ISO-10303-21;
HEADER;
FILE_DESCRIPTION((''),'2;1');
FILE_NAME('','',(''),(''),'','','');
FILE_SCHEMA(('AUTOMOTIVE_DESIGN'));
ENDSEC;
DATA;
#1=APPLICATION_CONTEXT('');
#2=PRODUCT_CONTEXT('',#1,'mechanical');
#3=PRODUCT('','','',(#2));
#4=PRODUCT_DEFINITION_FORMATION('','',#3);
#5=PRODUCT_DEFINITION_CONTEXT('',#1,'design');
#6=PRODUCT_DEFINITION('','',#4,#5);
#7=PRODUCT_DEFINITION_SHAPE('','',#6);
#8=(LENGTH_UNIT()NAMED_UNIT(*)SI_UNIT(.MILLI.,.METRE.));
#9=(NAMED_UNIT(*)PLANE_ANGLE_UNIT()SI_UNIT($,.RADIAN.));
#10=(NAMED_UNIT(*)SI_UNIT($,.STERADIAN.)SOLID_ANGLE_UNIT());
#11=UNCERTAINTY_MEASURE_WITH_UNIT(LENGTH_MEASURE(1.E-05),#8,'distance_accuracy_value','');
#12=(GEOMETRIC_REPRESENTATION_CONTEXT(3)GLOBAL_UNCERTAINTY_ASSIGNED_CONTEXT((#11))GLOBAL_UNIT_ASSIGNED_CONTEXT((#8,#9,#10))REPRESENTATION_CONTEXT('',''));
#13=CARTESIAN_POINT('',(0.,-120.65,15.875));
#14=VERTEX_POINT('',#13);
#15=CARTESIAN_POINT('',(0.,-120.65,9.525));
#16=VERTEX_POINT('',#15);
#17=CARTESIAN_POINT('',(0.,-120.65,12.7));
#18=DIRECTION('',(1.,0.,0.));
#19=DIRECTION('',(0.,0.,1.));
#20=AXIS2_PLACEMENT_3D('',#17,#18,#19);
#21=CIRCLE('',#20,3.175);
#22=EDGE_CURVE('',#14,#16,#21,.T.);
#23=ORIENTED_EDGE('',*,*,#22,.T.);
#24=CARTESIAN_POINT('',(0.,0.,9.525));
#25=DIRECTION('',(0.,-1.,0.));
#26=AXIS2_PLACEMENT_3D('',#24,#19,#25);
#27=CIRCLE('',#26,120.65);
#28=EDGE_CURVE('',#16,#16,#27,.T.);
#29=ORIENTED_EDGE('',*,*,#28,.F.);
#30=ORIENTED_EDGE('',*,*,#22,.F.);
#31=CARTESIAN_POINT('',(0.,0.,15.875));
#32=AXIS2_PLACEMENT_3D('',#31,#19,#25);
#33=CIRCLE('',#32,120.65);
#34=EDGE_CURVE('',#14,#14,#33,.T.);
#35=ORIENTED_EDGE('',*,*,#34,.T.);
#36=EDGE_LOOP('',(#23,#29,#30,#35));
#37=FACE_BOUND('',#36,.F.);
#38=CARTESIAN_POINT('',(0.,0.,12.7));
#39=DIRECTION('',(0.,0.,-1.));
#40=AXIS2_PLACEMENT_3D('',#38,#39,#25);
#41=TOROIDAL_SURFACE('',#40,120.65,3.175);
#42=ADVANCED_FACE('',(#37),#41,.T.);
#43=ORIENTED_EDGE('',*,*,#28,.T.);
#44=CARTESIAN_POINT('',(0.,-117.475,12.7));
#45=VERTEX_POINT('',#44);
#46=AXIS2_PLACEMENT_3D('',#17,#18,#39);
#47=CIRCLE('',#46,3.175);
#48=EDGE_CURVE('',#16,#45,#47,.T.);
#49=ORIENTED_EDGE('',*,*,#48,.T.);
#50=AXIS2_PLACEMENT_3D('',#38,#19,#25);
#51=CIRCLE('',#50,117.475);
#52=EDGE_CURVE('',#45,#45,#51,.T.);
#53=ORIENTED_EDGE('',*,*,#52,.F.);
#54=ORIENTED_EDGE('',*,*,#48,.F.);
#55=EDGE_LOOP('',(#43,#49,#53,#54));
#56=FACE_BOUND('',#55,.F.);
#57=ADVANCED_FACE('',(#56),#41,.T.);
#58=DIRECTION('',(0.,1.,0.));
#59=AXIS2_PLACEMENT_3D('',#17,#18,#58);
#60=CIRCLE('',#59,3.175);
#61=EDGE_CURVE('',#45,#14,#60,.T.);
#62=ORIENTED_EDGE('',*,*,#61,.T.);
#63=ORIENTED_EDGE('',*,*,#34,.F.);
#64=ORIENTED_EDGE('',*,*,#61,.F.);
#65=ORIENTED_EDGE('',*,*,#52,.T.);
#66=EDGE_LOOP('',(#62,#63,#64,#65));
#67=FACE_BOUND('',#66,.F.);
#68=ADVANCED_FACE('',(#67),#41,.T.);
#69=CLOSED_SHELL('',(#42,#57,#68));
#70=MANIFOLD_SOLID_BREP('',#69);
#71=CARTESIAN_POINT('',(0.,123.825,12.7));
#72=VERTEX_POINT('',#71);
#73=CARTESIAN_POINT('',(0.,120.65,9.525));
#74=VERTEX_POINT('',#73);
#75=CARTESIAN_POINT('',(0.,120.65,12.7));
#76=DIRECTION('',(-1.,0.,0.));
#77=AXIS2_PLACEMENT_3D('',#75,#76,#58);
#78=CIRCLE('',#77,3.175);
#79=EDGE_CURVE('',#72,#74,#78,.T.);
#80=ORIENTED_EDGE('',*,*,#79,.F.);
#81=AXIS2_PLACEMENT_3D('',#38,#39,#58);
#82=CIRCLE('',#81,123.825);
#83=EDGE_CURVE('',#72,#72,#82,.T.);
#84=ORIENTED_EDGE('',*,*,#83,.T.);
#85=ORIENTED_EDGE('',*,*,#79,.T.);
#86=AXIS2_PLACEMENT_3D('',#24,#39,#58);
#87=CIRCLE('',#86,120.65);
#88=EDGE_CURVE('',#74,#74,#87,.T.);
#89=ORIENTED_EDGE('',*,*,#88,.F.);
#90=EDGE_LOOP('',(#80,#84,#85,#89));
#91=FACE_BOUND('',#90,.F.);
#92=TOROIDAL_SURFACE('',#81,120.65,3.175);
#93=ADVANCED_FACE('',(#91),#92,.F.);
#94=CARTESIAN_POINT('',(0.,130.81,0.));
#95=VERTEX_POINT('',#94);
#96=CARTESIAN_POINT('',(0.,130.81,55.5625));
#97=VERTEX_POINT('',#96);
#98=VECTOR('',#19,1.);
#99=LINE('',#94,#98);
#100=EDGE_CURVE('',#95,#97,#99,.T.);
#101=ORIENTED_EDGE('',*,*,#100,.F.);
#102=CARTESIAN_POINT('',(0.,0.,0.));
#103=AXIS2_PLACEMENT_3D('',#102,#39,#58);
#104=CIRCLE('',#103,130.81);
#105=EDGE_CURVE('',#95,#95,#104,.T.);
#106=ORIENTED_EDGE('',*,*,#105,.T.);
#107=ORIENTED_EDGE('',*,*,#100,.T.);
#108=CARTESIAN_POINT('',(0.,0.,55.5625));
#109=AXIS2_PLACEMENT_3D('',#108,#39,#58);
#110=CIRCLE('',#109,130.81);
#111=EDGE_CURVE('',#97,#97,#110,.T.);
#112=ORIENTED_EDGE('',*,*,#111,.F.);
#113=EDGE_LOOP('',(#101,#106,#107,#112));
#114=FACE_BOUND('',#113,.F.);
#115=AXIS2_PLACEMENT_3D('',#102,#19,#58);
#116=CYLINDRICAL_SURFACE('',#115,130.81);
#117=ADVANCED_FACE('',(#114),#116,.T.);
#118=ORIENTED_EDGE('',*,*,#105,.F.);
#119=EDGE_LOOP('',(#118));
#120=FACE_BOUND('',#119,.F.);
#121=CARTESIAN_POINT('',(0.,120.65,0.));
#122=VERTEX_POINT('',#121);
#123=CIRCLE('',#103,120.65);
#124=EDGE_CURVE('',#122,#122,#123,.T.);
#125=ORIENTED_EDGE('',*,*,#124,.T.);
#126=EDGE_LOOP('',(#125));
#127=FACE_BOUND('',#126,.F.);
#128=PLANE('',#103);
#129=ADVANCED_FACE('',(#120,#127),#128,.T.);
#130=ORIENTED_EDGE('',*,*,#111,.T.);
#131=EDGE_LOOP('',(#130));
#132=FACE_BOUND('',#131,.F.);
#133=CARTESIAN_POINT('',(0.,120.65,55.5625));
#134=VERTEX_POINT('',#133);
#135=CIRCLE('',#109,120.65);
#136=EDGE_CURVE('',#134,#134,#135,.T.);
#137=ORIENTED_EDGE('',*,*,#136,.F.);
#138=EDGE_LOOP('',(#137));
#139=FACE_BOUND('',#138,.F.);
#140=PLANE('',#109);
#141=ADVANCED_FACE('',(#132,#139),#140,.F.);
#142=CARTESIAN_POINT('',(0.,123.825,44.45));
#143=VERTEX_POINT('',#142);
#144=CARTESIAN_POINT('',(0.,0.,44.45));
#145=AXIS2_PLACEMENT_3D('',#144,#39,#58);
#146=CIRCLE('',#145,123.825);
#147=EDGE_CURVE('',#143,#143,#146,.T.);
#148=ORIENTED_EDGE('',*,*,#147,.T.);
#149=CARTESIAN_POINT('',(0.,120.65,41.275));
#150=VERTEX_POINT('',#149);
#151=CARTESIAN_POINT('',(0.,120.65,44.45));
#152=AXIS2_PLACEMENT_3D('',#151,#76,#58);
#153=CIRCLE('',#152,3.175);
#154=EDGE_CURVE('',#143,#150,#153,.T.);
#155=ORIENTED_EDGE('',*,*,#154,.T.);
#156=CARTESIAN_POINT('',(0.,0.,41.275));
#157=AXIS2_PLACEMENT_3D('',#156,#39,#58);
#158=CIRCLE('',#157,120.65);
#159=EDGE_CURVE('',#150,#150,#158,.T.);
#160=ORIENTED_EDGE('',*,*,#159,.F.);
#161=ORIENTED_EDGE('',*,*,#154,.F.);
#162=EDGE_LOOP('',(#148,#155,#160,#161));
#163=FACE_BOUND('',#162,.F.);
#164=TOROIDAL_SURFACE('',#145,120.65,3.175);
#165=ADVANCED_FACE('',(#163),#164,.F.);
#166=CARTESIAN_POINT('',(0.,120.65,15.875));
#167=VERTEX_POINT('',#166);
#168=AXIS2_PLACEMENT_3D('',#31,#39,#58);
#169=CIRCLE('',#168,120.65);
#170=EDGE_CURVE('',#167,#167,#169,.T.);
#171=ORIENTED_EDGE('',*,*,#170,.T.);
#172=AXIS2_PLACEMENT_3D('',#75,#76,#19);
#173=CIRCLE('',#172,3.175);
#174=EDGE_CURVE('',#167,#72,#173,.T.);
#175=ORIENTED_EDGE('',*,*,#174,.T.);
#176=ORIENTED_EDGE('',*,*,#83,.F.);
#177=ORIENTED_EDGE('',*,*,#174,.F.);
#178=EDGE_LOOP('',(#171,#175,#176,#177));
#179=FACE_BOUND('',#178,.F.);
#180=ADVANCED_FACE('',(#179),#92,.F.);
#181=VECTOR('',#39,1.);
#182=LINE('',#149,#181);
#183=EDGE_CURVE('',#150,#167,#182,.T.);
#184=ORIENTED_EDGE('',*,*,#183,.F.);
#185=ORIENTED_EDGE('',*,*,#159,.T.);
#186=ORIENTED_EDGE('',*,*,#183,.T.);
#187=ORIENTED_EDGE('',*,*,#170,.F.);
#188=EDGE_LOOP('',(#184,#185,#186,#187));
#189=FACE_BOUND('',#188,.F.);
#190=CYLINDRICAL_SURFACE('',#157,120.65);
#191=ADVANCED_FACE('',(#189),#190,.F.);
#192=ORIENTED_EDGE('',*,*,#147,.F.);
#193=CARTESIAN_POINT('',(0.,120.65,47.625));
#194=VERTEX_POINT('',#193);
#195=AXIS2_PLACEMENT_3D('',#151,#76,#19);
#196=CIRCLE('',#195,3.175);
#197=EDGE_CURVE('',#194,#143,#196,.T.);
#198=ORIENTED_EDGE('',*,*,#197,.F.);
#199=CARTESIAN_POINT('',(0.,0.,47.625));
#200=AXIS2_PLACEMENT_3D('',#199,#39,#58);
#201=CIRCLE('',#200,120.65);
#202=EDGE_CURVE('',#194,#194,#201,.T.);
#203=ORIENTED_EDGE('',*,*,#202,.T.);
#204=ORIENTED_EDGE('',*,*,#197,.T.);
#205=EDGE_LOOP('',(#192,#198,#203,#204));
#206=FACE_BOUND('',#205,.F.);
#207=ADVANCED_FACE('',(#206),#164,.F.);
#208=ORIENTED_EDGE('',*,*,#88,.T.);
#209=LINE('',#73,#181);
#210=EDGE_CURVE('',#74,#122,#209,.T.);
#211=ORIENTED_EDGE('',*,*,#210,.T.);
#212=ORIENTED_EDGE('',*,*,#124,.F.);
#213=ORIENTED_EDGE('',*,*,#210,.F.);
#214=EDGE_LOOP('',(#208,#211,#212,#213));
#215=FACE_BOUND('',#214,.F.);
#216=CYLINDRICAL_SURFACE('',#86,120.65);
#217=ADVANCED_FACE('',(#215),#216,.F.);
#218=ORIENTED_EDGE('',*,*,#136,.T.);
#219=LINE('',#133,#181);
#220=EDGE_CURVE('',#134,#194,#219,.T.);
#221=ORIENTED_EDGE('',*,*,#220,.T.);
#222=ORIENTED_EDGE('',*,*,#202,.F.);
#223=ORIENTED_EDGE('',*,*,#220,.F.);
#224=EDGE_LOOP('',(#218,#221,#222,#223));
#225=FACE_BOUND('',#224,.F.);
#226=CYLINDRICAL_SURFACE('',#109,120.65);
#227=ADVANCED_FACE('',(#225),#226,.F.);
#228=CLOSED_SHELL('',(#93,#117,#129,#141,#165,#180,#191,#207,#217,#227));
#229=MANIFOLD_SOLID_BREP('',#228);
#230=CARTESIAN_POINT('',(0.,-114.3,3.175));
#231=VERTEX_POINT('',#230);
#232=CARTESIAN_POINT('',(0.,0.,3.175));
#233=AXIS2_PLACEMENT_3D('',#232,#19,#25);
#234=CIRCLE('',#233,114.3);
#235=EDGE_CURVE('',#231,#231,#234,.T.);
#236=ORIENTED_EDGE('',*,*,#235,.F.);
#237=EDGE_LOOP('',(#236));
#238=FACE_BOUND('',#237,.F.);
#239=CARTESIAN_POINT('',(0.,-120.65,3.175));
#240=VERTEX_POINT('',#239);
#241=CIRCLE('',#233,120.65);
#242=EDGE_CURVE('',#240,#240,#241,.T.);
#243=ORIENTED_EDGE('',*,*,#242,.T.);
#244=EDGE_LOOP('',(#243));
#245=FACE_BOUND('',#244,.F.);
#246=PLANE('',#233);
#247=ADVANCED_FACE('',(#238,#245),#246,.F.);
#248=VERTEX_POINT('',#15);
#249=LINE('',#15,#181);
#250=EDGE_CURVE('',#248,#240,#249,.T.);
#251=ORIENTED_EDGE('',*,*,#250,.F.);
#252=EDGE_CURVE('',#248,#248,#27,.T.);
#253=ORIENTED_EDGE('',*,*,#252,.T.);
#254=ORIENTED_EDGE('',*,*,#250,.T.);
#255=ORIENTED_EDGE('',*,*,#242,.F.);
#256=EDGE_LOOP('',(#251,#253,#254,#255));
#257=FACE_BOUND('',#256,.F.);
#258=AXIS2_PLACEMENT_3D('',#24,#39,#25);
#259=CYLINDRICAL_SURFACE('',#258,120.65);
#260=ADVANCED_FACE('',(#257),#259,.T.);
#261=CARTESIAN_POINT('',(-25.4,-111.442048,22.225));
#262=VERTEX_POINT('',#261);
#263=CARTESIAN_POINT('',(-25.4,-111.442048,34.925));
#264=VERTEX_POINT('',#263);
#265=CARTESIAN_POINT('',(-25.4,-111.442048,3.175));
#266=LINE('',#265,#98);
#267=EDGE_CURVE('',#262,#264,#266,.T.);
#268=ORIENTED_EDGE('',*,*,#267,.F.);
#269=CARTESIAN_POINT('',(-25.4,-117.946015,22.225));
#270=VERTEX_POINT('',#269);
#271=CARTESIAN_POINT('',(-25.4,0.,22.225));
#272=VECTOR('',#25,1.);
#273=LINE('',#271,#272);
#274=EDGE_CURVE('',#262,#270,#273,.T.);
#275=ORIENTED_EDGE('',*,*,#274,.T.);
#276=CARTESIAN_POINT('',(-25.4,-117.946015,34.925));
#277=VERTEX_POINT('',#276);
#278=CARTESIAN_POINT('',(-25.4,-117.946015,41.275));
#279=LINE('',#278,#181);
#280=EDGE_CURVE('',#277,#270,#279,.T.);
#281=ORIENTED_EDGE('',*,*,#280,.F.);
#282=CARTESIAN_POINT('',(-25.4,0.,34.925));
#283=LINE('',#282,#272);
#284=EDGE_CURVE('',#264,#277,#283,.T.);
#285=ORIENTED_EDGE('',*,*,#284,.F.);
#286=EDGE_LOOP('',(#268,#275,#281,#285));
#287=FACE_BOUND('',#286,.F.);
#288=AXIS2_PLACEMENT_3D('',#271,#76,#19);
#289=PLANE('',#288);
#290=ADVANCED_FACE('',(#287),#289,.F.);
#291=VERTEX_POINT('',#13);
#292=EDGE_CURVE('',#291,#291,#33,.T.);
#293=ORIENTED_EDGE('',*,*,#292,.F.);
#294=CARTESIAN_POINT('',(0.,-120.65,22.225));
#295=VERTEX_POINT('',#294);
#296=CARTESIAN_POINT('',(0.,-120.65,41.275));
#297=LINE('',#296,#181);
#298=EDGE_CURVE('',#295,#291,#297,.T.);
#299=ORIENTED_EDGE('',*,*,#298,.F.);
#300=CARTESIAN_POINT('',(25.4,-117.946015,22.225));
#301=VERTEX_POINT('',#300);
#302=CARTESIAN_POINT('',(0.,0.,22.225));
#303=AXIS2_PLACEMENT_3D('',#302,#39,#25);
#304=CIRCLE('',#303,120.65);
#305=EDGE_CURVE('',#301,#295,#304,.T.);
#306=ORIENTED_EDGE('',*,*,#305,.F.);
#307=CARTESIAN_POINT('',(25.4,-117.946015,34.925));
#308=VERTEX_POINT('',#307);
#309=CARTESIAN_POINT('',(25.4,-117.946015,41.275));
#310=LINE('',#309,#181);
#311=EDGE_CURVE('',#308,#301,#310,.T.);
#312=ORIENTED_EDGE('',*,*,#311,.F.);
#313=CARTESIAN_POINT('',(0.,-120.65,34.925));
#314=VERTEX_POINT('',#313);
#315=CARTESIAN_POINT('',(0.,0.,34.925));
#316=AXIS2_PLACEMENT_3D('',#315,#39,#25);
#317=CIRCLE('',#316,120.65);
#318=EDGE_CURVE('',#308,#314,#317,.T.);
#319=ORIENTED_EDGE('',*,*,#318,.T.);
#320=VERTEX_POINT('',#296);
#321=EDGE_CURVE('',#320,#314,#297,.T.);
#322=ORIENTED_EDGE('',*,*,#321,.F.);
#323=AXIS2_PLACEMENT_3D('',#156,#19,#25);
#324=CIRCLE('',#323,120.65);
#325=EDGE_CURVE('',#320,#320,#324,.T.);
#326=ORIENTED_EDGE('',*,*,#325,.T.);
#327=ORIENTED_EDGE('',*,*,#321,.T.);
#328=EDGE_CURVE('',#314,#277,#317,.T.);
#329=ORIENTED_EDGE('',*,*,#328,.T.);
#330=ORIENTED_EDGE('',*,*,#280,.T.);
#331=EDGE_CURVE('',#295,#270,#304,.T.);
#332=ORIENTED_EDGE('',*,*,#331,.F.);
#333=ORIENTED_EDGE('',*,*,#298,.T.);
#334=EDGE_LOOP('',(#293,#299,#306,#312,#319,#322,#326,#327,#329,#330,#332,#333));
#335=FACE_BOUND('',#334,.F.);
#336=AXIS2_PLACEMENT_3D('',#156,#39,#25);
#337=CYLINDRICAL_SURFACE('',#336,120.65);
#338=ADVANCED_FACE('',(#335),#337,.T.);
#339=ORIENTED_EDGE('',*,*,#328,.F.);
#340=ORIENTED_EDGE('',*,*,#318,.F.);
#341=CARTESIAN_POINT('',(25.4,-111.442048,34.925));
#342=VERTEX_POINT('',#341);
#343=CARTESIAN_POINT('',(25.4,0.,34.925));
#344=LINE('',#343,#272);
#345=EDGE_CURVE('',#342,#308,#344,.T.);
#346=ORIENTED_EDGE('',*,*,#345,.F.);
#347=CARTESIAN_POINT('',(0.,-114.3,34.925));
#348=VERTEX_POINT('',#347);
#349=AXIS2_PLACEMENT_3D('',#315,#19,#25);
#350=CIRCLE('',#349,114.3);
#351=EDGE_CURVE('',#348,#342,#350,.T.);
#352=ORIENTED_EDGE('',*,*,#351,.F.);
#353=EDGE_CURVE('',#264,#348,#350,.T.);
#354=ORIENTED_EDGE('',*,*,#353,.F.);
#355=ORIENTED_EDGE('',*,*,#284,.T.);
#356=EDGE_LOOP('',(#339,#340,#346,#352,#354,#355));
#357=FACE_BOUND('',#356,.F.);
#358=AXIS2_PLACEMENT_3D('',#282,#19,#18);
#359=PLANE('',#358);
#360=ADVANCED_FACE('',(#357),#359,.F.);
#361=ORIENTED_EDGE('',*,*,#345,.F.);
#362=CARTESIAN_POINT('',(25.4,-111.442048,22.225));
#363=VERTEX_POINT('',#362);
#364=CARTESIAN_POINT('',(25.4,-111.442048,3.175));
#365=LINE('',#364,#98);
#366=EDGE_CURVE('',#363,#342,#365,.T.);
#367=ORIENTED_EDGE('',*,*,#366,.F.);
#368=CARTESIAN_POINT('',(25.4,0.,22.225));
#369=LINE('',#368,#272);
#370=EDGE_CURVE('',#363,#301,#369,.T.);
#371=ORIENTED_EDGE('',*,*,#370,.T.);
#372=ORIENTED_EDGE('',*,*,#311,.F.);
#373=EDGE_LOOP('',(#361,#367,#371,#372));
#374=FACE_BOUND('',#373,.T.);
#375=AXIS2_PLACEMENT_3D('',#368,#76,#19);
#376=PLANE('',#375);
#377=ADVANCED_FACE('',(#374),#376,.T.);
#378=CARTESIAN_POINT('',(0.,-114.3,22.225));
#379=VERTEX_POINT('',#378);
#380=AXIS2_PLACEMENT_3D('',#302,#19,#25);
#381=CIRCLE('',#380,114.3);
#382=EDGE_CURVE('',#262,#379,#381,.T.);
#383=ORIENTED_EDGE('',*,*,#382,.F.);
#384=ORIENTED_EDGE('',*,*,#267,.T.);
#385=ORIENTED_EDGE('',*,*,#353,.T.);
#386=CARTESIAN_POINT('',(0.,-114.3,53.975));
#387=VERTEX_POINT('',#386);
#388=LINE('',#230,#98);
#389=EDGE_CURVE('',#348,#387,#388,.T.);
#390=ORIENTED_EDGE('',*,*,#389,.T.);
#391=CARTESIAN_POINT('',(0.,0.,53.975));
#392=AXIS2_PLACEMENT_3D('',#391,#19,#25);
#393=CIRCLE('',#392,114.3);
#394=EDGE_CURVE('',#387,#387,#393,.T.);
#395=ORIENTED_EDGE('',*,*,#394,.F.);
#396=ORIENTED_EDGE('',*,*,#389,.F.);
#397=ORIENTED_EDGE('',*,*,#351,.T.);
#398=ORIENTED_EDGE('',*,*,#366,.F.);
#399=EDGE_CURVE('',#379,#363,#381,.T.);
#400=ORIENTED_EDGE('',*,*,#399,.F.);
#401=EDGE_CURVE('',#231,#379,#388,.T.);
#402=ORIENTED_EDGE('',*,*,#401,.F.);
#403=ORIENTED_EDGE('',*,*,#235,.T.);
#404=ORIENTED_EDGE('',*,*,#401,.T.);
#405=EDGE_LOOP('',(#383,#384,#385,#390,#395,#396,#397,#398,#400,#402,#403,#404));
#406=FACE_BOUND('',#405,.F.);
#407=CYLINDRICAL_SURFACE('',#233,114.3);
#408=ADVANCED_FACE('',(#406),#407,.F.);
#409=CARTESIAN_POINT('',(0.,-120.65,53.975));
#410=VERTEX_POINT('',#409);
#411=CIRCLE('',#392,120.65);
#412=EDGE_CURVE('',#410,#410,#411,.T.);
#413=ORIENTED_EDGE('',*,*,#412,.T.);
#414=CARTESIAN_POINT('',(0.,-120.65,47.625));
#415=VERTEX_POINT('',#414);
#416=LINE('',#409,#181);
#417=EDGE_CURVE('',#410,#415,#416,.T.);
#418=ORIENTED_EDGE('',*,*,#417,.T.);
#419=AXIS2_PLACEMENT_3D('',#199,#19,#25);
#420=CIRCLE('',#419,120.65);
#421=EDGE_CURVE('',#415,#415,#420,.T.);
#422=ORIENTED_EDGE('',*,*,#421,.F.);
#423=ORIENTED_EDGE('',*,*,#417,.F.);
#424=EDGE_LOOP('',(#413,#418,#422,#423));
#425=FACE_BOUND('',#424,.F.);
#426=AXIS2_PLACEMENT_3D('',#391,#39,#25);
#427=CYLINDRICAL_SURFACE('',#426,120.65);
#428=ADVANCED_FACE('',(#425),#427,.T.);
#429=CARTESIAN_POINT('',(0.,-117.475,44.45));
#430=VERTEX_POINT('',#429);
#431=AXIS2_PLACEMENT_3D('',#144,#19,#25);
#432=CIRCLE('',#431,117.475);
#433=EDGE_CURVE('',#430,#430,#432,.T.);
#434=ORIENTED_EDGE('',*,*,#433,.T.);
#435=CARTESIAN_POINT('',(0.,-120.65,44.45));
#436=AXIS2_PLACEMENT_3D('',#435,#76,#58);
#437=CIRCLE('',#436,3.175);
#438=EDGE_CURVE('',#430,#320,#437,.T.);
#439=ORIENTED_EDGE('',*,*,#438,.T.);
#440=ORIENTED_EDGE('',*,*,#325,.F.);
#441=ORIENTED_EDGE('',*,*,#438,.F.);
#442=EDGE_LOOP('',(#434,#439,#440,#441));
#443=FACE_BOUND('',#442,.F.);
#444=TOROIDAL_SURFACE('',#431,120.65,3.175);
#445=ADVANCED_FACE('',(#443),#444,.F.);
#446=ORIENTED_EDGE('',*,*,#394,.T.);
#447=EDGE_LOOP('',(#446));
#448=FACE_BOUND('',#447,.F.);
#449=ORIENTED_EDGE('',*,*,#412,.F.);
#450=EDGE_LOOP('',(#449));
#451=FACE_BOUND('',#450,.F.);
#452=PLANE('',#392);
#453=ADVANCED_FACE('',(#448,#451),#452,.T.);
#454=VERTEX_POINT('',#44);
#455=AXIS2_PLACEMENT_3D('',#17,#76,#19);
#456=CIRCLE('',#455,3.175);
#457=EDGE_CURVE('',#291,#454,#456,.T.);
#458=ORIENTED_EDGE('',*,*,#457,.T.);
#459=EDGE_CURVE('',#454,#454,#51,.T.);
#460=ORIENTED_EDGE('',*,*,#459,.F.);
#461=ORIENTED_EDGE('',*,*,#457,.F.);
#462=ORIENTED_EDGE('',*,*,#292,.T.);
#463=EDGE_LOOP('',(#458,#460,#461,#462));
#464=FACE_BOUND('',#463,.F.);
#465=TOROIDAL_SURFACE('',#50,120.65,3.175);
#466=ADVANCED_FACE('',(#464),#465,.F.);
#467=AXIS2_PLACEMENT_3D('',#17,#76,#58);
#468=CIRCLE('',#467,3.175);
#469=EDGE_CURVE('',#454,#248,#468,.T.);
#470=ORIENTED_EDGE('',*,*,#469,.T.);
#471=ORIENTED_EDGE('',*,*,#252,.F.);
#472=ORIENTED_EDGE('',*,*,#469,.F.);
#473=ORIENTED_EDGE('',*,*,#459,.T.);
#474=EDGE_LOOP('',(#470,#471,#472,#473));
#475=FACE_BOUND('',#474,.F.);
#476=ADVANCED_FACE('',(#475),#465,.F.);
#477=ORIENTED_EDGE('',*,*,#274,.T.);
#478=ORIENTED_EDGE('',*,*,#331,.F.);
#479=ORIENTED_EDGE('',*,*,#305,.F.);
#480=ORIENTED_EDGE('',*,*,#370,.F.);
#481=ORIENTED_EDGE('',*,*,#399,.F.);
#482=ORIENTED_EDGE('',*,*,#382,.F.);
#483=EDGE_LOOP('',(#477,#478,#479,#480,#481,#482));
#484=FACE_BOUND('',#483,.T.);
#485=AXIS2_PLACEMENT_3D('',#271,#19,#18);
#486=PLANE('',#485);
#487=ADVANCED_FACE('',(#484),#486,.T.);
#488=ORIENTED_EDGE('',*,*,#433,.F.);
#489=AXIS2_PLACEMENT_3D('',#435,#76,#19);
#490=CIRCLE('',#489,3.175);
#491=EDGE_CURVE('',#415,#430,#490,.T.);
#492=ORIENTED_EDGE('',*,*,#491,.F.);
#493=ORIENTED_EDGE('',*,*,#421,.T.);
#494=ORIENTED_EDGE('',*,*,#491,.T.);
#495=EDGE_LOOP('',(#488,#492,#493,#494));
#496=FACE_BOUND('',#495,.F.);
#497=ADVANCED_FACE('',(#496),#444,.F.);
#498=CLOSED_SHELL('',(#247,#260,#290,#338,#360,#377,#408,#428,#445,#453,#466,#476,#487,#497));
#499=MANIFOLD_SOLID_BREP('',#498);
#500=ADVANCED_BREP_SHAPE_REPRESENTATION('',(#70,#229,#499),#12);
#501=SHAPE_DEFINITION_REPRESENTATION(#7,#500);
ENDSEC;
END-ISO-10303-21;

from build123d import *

# Parameters (mm, degrees)
F7_W     = 50.8
F7_H     = 12.7
F8_DEPTH = 130.811


# Not quite as in the source:
# - a feature of the source that left no trace in its solid (it failed there, or was rolled back) is left out


with BuildPart() as f1:
    # F0 (on Right) → F1 (revolve)
    with BuildSketch(Plane.YZ):
        with BuildLine():
            Line((-120.65, 3.175), (-114.3, 3.175))
            Line((-114.3, 3.175), (-114.3, 53.975))
            Line((-114.3, 53.975), (-120.65, 53.975))
            Line((-120.65, 53.975), (-120.65, 47.625))
            ThreePointArc((-120.65, 47.625), (-118.4049359697, 46.6950640303), (-117.475, 44.45))
            ThreePointArc((-117.475, 44.45), (-118.4049359697, 42.2049359697), (-120.65, 41.275))
            Line((-120.65, 41.275), (-120.65, 15.875))
            ThreePointArc((-120.65, 15.875), (-118.4049359697, 14.9450640303), (-117.475, 12.7))
            ThreePointArc((-117.475, 12.7), (-118.4049359697, 10.4549359697), (-120.65, 9.525))
            Line((-120.65, 9.525), (-120.65, 3.175))
        make_face()
    revolve(axis=Axis((0, 0, 81.893116076), (0, 0, 1)))


with BuildPart() as f3:
    # F2 (on Right) → F3 (revolve)
    with BuildSketch(Plane.YZ):
        with BuildLine():
            Line((130.81, 55.5625), (120.65, 55.5625))
            Line((120.65, 55.5625), (120.65, 47.625))
            ThreePointArc((120.65, 47.625), (122.8950640303, 46.6950640303), (123.825, 44.45))
            ThreePointArc((123.825, 44.45), (122.8950640303, 42.2049359697), (120.65, 41.275))
            Line((120.65, 41.275), (120.65, 15.875))
            ThreePointArc((120.65, 15.875), (122.8950640303, 14.9450640303), (123.825, 12.7))
            ThreePointArc((123.825, 12.7), (122.8950640303, 10.4549359697), (120.65, 9.525))
            Line((120.65, 9.525), (120.65, 0))
            Line((120.65, 0), (130.81, 0))
            Line((130.81, 0), (130.81, 55.5625))
        make_face()
    revolve(axis=Axis((0, 0, 8.8796737873), (0, 0, -1)))


with BuildPart() as f5:
    # F0 (on Right) → F5 (revolve)
    with BuildSketch(Plane.YZ):
        with BuildLine():
            Line((-120.65, 3.175), (-114.3, 3.175))
            Line((-114.3, 3.175), (-114.3, 53.975))
            Line((-114.3, 53.975), (-120.65, 53.975))
            Line((-120.65, 53.975), (-120.65, 47.625))
            ThreePointArc((-120.65, 47.625), (-118.4049359697, 46.6950640303), (-117.475, 44.45))
            ThreePointArc((-117.475, 44.45), (-118.4049359697, 42.2049359697), (-120.65, 41.275))
            Line((-120.65, 41.275), (-120.65, 15.875))
            ThreePointArc((-120.65, 15.875), (-118.4049359697, 14.9450640303), (-117.475, 12.7))
            ThreePointArc((-117.475, 12.7), (-118.4049359697, 10.4549359697), (-120.65, 9.525))
            Line((-120.65, 9.525), (-120.65, 3.175))
        make_face()
    revolve(axis=Axis((0, 0, 81.893116076), (0, 0, 1)))


with BuildPart() as f8_tool:
    # F7 (on Front) → F8 (new body, through all)
    with BuildSketch(Plane.XZ):
        with Locations((0, 28.575)):
            Rectangle(F7_W, F7_H)
    extrude(amount=F8_DEPTH)


with BuildPart() as f1_1:
    add(f1.part)

    # F8: cut by f8_tool
    add(f8_tool.part, mode=Mode.SUBTRACT)


with BuildPart() as f5_1:
    add(f5.part)

    # F8: cut by f8_tool
    add(f8_tool.part, mode=Mode.SUBTRACT)


with BuildPart() as f9:
    # F0 (on Right) → F9 (revolve)
    with BuildSketch(Plane.YZ):
        with BuildLine():
            ThreePointArc((-120.65, 15.875), (-123.825, 12.7), (-120.65, 9.525))
            Line((-120.65, 9.525), (-120.65, 15.875))
        make_face()
        with BuildLine():
            Line((-120.65, 15.875), (-120.65, 9.525))
            ThreePointArc((-120.65, 9.525), (-118.4049359697, 10.4549359697), (-117.475, 12.7))
            ThreePointArc((-117.475, 12.7), (-118.4049359697, 14.9450640303), (-120.65, 15.875))
        make_face()
    revolve(axis=Axis((0, 0, 81.893116076), (0, 0, 1)))


solid = Compound([f3.part, f1_1.part, f9.part])
